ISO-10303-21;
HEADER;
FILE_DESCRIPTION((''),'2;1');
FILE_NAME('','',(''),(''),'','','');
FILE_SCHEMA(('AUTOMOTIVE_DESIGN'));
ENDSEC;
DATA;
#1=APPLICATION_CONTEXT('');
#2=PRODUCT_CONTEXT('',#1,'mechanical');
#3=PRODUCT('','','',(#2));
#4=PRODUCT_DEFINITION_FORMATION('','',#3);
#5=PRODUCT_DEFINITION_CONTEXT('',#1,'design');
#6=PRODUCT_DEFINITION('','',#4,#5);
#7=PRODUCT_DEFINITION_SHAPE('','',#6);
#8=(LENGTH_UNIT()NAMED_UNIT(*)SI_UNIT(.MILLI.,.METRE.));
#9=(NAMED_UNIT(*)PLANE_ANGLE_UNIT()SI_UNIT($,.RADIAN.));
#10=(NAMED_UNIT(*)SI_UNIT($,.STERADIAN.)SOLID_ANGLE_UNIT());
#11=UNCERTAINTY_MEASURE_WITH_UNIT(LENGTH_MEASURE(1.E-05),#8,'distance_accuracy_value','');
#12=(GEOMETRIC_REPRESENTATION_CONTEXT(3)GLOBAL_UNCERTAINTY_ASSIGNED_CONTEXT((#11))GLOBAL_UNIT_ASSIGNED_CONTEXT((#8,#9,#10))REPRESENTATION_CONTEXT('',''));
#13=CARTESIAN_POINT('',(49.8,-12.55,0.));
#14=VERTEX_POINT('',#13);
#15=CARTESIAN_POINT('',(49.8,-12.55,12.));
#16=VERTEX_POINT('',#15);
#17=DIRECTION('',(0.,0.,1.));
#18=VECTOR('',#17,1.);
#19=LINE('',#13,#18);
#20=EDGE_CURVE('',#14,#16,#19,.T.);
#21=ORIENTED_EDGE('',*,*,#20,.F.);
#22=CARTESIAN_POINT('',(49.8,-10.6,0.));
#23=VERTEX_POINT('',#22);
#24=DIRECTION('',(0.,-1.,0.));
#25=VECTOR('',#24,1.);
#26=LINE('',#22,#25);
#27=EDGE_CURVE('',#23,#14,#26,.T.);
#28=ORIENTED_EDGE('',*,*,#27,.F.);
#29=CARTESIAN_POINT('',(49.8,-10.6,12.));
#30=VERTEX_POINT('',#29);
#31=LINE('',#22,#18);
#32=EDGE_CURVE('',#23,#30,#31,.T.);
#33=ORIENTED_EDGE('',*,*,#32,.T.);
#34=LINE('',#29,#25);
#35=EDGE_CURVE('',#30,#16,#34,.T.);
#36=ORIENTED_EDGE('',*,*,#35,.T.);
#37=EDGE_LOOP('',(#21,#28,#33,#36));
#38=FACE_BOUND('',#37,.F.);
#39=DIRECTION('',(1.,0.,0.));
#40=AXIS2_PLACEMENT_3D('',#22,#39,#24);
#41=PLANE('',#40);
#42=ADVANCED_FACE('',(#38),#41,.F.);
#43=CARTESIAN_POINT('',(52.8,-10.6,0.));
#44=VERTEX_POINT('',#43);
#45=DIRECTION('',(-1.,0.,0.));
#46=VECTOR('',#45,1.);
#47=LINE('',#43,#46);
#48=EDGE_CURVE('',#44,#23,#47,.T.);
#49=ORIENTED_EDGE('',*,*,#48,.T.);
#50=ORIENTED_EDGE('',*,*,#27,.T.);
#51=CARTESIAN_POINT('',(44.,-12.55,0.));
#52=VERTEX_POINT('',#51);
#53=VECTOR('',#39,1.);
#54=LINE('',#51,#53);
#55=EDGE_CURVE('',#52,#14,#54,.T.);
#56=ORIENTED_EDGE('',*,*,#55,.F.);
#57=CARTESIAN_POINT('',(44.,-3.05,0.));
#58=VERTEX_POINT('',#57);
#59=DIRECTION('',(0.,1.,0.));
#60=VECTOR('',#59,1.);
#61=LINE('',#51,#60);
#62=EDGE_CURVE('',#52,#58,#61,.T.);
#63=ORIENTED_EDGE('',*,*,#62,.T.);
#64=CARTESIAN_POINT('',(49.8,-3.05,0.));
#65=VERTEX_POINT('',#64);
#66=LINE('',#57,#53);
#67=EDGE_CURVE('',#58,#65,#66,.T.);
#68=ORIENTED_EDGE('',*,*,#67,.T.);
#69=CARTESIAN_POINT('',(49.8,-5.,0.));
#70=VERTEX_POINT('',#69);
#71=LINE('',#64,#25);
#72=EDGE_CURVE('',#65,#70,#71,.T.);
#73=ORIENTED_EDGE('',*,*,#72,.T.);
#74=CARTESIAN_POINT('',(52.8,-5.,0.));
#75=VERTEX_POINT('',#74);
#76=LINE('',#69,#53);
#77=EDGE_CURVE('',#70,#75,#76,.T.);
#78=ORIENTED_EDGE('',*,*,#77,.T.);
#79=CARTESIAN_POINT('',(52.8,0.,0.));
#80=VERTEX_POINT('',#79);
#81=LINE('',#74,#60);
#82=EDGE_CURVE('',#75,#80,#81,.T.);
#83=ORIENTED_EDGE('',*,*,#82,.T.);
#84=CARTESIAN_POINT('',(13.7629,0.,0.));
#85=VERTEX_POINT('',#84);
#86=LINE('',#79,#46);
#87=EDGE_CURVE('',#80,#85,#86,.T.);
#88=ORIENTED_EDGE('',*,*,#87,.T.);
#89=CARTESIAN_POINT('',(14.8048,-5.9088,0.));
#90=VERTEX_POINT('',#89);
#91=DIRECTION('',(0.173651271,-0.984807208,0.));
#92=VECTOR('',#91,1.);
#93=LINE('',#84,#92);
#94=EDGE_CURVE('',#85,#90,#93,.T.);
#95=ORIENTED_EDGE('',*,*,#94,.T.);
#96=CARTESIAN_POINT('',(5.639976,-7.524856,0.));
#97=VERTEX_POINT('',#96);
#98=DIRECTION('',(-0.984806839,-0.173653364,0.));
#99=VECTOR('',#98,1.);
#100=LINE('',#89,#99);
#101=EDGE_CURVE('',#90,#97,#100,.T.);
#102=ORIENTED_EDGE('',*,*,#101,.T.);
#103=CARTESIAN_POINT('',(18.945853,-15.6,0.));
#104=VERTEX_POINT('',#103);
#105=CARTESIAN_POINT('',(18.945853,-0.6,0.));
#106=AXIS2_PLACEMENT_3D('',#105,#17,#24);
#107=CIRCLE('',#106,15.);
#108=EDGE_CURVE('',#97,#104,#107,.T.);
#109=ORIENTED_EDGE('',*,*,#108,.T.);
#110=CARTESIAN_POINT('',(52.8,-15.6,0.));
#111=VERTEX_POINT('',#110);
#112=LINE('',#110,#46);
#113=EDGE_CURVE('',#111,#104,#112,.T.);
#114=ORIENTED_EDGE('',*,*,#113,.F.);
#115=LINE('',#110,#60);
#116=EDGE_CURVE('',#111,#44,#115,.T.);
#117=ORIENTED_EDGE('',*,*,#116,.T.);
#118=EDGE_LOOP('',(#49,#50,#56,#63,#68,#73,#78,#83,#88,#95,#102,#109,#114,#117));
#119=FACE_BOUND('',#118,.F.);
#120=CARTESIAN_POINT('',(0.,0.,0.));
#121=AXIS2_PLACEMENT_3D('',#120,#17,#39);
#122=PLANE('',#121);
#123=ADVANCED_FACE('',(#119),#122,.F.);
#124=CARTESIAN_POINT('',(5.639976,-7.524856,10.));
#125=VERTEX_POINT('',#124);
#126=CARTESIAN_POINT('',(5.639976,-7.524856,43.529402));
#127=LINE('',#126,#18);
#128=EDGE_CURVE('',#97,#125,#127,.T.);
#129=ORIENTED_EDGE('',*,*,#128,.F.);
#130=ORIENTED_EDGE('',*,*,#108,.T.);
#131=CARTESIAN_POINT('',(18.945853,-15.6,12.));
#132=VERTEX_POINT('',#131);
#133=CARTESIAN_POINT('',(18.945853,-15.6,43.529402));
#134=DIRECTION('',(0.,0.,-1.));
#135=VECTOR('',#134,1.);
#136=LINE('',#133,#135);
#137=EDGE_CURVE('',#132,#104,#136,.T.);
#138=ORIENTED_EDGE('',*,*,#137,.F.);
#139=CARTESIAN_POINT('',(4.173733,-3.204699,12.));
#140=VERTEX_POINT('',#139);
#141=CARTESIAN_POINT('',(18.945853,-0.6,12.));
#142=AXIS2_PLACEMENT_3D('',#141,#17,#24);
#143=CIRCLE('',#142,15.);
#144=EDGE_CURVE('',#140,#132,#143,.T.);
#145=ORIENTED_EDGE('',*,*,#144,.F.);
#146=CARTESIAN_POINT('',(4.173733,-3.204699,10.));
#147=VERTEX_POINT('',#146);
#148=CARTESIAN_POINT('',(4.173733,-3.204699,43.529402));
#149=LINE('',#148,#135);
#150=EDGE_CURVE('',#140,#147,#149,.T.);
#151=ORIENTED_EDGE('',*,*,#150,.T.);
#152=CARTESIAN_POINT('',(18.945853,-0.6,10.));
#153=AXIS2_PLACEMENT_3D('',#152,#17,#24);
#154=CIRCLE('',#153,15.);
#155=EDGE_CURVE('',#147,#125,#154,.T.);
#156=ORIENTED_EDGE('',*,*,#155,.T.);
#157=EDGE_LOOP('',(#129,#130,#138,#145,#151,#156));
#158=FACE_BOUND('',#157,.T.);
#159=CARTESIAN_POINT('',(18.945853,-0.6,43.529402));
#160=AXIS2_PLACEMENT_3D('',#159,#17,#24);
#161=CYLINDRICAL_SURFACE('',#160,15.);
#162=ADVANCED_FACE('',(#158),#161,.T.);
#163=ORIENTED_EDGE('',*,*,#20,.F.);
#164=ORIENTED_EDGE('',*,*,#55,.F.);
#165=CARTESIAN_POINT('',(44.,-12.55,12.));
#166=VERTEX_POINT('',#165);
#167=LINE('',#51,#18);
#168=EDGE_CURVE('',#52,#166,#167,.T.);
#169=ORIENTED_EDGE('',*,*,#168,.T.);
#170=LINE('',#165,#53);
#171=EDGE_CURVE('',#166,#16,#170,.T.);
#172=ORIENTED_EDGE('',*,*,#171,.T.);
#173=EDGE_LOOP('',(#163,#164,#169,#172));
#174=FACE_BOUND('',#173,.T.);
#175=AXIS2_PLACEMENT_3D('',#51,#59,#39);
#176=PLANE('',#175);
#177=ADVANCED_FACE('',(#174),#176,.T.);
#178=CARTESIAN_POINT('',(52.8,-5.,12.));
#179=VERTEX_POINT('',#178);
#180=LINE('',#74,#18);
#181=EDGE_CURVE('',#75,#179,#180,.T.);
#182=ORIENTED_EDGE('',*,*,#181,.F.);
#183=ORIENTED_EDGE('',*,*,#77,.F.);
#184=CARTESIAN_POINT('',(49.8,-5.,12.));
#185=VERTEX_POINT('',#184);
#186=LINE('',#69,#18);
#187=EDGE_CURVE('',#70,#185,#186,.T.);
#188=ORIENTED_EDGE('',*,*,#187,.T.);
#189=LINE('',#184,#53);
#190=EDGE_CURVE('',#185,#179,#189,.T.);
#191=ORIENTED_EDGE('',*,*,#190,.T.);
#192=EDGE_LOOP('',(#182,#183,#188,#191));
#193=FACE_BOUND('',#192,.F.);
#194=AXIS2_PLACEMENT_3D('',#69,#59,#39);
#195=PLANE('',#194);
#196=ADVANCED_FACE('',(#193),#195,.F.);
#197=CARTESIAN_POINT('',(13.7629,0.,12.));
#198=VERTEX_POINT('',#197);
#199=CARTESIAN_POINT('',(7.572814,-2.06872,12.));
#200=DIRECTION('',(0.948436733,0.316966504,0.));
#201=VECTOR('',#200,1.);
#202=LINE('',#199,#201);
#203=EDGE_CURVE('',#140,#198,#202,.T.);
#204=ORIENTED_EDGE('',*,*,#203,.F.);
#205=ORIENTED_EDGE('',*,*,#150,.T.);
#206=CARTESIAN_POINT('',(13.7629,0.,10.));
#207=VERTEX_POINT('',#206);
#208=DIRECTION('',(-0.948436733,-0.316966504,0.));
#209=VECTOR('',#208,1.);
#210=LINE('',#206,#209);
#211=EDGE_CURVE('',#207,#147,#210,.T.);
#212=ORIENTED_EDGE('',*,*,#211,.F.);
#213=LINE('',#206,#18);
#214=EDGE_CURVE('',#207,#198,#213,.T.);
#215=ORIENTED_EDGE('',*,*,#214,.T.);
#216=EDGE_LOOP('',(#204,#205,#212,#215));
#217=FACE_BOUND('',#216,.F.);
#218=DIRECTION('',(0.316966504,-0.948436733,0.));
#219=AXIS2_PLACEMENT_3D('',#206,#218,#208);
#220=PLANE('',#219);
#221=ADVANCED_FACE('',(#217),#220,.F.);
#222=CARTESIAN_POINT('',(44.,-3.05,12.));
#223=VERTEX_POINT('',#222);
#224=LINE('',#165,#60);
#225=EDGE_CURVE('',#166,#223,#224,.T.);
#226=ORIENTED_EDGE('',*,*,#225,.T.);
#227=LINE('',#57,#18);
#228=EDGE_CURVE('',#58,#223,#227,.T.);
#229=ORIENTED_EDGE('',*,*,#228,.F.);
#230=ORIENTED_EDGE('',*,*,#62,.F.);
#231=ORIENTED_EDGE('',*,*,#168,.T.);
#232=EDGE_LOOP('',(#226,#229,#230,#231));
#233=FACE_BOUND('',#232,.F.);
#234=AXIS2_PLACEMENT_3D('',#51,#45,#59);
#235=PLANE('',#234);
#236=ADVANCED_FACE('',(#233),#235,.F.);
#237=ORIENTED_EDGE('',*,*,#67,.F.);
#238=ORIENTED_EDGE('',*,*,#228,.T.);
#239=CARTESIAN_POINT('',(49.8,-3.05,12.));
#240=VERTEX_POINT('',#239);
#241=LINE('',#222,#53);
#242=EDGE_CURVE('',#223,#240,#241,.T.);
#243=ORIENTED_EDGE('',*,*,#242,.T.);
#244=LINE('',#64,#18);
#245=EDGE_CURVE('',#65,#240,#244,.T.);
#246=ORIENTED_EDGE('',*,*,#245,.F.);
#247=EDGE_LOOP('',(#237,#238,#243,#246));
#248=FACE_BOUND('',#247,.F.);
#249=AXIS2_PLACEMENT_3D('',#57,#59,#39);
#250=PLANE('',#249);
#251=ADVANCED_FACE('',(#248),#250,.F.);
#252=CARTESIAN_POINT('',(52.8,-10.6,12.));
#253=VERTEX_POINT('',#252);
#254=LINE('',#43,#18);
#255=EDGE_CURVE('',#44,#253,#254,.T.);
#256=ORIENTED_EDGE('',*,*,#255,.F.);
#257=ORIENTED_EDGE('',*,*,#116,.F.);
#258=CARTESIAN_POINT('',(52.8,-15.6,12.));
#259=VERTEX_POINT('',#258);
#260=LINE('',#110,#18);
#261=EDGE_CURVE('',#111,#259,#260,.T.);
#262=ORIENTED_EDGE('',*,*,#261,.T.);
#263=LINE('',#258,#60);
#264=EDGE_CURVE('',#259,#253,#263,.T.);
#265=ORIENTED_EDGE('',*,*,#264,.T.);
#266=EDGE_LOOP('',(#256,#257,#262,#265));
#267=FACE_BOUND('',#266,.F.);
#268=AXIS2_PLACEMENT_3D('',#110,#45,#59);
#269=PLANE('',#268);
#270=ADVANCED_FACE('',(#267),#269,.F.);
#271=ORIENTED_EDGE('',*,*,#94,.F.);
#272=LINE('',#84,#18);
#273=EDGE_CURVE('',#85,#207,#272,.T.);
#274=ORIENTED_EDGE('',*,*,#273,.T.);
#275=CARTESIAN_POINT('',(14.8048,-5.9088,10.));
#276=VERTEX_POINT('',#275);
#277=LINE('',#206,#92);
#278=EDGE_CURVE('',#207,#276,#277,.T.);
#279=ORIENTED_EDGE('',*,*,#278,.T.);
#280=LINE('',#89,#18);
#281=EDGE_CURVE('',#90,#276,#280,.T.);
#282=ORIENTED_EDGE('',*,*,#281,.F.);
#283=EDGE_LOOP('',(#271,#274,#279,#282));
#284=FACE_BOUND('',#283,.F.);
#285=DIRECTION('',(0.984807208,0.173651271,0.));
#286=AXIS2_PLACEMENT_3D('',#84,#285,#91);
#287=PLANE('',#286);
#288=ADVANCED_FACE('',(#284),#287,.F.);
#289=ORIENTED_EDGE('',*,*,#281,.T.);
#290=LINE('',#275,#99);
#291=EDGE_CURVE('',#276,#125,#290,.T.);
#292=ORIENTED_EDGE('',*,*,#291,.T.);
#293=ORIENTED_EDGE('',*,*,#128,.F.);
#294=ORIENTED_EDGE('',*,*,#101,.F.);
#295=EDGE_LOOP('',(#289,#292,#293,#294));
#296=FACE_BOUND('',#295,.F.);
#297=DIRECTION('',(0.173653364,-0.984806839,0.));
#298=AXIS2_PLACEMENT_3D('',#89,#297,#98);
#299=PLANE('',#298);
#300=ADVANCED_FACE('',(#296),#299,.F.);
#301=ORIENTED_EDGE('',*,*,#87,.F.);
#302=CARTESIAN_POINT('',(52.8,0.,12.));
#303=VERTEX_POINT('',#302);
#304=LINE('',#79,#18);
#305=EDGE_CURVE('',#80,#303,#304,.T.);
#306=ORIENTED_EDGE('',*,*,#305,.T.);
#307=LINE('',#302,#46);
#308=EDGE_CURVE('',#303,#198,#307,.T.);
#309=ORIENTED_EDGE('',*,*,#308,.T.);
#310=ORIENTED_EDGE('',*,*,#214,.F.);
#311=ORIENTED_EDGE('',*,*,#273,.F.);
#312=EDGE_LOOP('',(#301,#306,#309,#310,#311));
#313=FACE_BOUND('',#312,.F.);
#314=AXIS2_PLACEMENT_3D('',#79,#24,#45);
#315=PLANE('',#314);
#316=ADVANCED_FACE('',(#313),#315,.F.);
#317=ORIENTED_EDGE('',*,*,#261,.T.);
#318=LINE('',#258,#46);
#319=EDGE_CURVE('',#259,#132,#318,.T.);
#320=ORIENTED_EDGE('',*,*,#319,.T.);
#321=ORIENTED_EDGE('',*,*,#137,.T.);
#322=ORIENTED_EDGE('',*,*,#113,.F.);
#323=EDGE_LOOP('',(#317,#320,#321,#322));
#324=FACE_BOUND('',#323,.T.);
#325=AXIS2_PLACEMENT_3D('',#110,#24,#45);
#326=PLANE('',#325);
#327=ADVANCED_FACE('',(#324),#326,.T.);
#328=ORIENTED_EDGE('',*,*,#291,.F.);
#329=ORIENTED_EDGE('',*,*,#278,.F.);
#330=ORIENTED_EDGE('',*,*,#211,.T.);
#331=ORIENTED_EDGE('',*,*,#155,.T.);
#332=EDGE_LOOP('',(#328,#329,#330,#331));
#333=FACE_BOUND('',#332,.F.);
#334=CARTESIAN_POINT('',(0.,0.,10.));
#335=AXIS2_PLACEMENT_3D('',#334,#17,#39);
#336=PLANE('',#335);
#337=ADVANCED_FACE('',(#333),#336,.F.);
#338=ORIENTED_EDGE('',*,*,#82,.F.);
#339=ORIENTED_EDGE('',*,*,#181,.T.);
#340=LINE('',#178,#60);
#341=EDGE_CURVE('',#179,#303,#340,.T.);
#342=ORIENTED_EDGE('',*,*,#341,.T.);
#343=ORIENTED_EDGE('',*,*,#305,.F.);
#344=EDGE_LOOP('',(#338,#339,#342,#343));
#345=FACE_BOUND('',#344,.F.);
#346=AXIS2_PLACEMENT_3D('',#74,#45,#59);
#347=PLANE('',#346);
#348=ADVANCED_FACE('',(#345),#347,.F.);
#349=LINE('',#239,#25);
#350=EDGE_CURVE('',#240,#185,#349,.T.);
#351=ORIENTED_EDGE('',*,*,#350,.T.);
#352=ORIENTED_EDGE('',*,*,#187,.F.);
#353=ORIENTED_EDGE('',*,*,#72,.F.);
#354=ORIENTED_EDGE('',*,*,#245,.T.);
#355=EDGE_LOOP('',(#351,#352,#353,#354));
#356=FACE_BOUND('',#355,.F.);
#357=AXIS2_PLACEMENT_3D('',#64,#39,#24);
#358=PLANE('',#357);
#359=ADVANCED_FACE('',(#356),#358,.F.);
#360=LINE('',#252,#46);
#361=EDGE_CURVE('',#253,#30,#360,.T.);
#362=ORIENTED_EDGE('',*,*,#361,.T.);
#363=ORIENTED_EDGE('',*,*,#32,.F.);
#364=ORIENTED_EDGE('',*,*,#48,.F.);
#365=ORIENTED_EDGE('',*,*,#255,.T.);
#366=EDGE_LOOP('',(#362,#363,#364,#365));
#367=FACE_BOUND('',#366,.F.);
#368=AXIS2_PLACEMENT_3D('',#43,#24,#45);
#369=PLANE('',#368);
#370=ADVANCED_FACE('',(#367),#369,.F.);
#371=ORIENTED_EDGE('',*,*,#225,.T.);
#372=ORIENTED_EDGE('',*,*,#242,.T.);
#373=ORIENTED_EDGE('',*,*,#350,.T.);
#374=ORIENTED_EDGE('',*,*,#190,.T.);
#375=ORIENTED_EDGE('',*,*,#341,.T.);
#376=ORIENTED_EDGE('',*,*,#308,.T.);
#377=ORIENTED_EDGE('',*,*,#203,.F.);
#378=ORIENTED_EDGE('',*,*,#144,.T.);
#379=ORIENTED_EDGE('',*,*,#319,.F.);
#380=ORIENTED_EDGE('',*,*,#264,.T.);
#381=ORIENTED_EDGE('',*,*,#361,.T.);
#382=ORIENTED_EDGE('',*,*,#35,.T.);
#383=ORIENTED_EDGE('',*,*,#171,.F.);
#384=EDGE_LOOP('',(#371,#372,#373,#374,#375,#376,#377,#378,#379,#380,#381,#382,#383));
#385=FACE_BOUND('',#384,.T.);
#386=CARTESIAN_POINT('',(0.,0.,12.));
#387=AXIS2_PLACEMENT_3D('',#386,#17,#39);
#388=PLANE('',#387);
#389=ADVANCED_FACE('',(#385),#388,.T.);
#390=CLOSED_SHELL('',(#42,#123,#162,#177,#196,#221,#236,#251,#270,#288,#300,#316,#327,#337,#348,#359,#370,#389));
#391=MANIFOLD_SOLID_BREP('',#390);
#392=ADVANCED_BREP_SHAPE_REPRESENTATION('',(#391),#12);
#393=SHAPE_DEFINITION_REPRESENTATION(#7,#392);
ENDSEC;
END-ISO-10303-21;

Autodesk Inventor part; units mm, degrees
ref_plane "YZ Plane" through (0, 0, 0) normal (1, 0, 0) x (0, 1, 0)
ref_plane "XZ Plane" through (0, 0, 0) normal (0, 1, 0) x (-1, 0, 0)
ref_plane "XY Plane" through (0, 0, 0) normal (0, 0, 1) x (1, 0, 0)
sketch "Sketch5" plane through (0, 0, 0) normal (0, 0, 1) x (1, 0, 0)
  line L0 (52.8, -15.6) -> (52.8, -10.6)
  line L1 (52.8, -10.6) -> (49.8, -10.6)
  line L2 (49.8, -10.6) -> (49.8, -12.55)
  line L3 (44, -12.55) -> (44, -3.05)
  line L4 (49.8, -3.05) -> (49.8, -5)
  line L5 (49.8, -5) -> (52.8, -5)
  line L6 (52.8, -5) -> (52.8, 0)
  line L7 (52.8, 0) -> (7.8, 0)
  line L8 (44, -3.05) -> (49.8, -3.05)
  line L9 (44, -12.55) -> (49.8, -12.55)
  line L10 (52.8, -15.6) -> (7.8, -15.6)
  arc A0 (7.8, 0) -> (7.8, -15.6) centre (7.8, -7.8) ccw
  point P0 (0, 0)
  dimension "d41" = 5.8
  dimension "d48" = 44
  dimension "d50" = 3
  dimension "d63" = 45
  dimension "d67" = 15.6
  dimension "d71" = 0
  dimension "d72" = 36.2
  dimension "d87" = 5.6
  dimension "d88" = 9.5
extrude "Extrusion2" add sketch "Sketch5" along normal blind 12
sketch "Sketch11" plane through (0, 0, 12) normal (0, 0, 1) x (1, 0, 0)
  line L0 (52.8, 0) -> (7.8, 0) projected
  line L1 (13.7629, 0) -> (14.8048, -5.9088)
  line L2 (14.8048, -5.9088) -> (0.0327, -8.5136)
  arc A0 (7.8, 0) -> (7.8, -15.6) centre (7.8, -7.8) ccw projected
  point P0 (0, 0)
  dimension "d95" = 100
  dimension "d96" = 6
  dimension "d97" = 15
extrude "Extrusion7" cut sketch "Sketch11" along normal blind 10 from surface at -12
sketch "Sketch14" plane through (0, 0, 12) normal (0, 0, 1) x (1, 0, 0)
  line L0 (2.7571, 4.8295) -> (7.0478, -19.5045)
  line L1 (7.0478, -19.5045) -> (-13.9668, -23.21)
  line L2 (-13.9668, -23.21) -> (-18.2576, 1.124)
  line L3 (-18.2576, 1.124) -> (2.7571, 4.8295)
  line L4 (13.7629, 0) -> (14.8048, -5.9088) projected
  point P0 (0, 0)
  dimension "d111" = 10
extrude "Extrusion10" cut sketch "Sketch14" against normal through all
fillet "Fillet2" radius 15 1 edges at (6.3349, -15.4612, 6)
sketch "Sketch15" plane through (13.7629, 0, 10) normal (0, 0, -1) x (-1, 0, 0)
  line L0 (-39.0371, 0) -> (0, 0) projected
  arc A0 (-5.1829, -15.6) -> (9.5892, -3.2047) centre (-5.1829, -0.6) ccw projected
  line L1 (0, 0) -> (9.5892, -3.2047)
  line L2 (0, 0) -> (5.9629, 0) projected
  arc A1 (9.96, -1.102) -> (5.9629, 0) centre (5.9629, -7.8) ccw projected
  line L3 (9.5892, -3.2047) -> (9.96, -1.102) projected
  point P0 (13.7629, 0)
extrude "Extrusion11" cut sketch "Sketch15" against normal blind 10
equation "\"l1\" = 8"
properties part number "Finray_test_8_Kerbe_10deg_V4"
